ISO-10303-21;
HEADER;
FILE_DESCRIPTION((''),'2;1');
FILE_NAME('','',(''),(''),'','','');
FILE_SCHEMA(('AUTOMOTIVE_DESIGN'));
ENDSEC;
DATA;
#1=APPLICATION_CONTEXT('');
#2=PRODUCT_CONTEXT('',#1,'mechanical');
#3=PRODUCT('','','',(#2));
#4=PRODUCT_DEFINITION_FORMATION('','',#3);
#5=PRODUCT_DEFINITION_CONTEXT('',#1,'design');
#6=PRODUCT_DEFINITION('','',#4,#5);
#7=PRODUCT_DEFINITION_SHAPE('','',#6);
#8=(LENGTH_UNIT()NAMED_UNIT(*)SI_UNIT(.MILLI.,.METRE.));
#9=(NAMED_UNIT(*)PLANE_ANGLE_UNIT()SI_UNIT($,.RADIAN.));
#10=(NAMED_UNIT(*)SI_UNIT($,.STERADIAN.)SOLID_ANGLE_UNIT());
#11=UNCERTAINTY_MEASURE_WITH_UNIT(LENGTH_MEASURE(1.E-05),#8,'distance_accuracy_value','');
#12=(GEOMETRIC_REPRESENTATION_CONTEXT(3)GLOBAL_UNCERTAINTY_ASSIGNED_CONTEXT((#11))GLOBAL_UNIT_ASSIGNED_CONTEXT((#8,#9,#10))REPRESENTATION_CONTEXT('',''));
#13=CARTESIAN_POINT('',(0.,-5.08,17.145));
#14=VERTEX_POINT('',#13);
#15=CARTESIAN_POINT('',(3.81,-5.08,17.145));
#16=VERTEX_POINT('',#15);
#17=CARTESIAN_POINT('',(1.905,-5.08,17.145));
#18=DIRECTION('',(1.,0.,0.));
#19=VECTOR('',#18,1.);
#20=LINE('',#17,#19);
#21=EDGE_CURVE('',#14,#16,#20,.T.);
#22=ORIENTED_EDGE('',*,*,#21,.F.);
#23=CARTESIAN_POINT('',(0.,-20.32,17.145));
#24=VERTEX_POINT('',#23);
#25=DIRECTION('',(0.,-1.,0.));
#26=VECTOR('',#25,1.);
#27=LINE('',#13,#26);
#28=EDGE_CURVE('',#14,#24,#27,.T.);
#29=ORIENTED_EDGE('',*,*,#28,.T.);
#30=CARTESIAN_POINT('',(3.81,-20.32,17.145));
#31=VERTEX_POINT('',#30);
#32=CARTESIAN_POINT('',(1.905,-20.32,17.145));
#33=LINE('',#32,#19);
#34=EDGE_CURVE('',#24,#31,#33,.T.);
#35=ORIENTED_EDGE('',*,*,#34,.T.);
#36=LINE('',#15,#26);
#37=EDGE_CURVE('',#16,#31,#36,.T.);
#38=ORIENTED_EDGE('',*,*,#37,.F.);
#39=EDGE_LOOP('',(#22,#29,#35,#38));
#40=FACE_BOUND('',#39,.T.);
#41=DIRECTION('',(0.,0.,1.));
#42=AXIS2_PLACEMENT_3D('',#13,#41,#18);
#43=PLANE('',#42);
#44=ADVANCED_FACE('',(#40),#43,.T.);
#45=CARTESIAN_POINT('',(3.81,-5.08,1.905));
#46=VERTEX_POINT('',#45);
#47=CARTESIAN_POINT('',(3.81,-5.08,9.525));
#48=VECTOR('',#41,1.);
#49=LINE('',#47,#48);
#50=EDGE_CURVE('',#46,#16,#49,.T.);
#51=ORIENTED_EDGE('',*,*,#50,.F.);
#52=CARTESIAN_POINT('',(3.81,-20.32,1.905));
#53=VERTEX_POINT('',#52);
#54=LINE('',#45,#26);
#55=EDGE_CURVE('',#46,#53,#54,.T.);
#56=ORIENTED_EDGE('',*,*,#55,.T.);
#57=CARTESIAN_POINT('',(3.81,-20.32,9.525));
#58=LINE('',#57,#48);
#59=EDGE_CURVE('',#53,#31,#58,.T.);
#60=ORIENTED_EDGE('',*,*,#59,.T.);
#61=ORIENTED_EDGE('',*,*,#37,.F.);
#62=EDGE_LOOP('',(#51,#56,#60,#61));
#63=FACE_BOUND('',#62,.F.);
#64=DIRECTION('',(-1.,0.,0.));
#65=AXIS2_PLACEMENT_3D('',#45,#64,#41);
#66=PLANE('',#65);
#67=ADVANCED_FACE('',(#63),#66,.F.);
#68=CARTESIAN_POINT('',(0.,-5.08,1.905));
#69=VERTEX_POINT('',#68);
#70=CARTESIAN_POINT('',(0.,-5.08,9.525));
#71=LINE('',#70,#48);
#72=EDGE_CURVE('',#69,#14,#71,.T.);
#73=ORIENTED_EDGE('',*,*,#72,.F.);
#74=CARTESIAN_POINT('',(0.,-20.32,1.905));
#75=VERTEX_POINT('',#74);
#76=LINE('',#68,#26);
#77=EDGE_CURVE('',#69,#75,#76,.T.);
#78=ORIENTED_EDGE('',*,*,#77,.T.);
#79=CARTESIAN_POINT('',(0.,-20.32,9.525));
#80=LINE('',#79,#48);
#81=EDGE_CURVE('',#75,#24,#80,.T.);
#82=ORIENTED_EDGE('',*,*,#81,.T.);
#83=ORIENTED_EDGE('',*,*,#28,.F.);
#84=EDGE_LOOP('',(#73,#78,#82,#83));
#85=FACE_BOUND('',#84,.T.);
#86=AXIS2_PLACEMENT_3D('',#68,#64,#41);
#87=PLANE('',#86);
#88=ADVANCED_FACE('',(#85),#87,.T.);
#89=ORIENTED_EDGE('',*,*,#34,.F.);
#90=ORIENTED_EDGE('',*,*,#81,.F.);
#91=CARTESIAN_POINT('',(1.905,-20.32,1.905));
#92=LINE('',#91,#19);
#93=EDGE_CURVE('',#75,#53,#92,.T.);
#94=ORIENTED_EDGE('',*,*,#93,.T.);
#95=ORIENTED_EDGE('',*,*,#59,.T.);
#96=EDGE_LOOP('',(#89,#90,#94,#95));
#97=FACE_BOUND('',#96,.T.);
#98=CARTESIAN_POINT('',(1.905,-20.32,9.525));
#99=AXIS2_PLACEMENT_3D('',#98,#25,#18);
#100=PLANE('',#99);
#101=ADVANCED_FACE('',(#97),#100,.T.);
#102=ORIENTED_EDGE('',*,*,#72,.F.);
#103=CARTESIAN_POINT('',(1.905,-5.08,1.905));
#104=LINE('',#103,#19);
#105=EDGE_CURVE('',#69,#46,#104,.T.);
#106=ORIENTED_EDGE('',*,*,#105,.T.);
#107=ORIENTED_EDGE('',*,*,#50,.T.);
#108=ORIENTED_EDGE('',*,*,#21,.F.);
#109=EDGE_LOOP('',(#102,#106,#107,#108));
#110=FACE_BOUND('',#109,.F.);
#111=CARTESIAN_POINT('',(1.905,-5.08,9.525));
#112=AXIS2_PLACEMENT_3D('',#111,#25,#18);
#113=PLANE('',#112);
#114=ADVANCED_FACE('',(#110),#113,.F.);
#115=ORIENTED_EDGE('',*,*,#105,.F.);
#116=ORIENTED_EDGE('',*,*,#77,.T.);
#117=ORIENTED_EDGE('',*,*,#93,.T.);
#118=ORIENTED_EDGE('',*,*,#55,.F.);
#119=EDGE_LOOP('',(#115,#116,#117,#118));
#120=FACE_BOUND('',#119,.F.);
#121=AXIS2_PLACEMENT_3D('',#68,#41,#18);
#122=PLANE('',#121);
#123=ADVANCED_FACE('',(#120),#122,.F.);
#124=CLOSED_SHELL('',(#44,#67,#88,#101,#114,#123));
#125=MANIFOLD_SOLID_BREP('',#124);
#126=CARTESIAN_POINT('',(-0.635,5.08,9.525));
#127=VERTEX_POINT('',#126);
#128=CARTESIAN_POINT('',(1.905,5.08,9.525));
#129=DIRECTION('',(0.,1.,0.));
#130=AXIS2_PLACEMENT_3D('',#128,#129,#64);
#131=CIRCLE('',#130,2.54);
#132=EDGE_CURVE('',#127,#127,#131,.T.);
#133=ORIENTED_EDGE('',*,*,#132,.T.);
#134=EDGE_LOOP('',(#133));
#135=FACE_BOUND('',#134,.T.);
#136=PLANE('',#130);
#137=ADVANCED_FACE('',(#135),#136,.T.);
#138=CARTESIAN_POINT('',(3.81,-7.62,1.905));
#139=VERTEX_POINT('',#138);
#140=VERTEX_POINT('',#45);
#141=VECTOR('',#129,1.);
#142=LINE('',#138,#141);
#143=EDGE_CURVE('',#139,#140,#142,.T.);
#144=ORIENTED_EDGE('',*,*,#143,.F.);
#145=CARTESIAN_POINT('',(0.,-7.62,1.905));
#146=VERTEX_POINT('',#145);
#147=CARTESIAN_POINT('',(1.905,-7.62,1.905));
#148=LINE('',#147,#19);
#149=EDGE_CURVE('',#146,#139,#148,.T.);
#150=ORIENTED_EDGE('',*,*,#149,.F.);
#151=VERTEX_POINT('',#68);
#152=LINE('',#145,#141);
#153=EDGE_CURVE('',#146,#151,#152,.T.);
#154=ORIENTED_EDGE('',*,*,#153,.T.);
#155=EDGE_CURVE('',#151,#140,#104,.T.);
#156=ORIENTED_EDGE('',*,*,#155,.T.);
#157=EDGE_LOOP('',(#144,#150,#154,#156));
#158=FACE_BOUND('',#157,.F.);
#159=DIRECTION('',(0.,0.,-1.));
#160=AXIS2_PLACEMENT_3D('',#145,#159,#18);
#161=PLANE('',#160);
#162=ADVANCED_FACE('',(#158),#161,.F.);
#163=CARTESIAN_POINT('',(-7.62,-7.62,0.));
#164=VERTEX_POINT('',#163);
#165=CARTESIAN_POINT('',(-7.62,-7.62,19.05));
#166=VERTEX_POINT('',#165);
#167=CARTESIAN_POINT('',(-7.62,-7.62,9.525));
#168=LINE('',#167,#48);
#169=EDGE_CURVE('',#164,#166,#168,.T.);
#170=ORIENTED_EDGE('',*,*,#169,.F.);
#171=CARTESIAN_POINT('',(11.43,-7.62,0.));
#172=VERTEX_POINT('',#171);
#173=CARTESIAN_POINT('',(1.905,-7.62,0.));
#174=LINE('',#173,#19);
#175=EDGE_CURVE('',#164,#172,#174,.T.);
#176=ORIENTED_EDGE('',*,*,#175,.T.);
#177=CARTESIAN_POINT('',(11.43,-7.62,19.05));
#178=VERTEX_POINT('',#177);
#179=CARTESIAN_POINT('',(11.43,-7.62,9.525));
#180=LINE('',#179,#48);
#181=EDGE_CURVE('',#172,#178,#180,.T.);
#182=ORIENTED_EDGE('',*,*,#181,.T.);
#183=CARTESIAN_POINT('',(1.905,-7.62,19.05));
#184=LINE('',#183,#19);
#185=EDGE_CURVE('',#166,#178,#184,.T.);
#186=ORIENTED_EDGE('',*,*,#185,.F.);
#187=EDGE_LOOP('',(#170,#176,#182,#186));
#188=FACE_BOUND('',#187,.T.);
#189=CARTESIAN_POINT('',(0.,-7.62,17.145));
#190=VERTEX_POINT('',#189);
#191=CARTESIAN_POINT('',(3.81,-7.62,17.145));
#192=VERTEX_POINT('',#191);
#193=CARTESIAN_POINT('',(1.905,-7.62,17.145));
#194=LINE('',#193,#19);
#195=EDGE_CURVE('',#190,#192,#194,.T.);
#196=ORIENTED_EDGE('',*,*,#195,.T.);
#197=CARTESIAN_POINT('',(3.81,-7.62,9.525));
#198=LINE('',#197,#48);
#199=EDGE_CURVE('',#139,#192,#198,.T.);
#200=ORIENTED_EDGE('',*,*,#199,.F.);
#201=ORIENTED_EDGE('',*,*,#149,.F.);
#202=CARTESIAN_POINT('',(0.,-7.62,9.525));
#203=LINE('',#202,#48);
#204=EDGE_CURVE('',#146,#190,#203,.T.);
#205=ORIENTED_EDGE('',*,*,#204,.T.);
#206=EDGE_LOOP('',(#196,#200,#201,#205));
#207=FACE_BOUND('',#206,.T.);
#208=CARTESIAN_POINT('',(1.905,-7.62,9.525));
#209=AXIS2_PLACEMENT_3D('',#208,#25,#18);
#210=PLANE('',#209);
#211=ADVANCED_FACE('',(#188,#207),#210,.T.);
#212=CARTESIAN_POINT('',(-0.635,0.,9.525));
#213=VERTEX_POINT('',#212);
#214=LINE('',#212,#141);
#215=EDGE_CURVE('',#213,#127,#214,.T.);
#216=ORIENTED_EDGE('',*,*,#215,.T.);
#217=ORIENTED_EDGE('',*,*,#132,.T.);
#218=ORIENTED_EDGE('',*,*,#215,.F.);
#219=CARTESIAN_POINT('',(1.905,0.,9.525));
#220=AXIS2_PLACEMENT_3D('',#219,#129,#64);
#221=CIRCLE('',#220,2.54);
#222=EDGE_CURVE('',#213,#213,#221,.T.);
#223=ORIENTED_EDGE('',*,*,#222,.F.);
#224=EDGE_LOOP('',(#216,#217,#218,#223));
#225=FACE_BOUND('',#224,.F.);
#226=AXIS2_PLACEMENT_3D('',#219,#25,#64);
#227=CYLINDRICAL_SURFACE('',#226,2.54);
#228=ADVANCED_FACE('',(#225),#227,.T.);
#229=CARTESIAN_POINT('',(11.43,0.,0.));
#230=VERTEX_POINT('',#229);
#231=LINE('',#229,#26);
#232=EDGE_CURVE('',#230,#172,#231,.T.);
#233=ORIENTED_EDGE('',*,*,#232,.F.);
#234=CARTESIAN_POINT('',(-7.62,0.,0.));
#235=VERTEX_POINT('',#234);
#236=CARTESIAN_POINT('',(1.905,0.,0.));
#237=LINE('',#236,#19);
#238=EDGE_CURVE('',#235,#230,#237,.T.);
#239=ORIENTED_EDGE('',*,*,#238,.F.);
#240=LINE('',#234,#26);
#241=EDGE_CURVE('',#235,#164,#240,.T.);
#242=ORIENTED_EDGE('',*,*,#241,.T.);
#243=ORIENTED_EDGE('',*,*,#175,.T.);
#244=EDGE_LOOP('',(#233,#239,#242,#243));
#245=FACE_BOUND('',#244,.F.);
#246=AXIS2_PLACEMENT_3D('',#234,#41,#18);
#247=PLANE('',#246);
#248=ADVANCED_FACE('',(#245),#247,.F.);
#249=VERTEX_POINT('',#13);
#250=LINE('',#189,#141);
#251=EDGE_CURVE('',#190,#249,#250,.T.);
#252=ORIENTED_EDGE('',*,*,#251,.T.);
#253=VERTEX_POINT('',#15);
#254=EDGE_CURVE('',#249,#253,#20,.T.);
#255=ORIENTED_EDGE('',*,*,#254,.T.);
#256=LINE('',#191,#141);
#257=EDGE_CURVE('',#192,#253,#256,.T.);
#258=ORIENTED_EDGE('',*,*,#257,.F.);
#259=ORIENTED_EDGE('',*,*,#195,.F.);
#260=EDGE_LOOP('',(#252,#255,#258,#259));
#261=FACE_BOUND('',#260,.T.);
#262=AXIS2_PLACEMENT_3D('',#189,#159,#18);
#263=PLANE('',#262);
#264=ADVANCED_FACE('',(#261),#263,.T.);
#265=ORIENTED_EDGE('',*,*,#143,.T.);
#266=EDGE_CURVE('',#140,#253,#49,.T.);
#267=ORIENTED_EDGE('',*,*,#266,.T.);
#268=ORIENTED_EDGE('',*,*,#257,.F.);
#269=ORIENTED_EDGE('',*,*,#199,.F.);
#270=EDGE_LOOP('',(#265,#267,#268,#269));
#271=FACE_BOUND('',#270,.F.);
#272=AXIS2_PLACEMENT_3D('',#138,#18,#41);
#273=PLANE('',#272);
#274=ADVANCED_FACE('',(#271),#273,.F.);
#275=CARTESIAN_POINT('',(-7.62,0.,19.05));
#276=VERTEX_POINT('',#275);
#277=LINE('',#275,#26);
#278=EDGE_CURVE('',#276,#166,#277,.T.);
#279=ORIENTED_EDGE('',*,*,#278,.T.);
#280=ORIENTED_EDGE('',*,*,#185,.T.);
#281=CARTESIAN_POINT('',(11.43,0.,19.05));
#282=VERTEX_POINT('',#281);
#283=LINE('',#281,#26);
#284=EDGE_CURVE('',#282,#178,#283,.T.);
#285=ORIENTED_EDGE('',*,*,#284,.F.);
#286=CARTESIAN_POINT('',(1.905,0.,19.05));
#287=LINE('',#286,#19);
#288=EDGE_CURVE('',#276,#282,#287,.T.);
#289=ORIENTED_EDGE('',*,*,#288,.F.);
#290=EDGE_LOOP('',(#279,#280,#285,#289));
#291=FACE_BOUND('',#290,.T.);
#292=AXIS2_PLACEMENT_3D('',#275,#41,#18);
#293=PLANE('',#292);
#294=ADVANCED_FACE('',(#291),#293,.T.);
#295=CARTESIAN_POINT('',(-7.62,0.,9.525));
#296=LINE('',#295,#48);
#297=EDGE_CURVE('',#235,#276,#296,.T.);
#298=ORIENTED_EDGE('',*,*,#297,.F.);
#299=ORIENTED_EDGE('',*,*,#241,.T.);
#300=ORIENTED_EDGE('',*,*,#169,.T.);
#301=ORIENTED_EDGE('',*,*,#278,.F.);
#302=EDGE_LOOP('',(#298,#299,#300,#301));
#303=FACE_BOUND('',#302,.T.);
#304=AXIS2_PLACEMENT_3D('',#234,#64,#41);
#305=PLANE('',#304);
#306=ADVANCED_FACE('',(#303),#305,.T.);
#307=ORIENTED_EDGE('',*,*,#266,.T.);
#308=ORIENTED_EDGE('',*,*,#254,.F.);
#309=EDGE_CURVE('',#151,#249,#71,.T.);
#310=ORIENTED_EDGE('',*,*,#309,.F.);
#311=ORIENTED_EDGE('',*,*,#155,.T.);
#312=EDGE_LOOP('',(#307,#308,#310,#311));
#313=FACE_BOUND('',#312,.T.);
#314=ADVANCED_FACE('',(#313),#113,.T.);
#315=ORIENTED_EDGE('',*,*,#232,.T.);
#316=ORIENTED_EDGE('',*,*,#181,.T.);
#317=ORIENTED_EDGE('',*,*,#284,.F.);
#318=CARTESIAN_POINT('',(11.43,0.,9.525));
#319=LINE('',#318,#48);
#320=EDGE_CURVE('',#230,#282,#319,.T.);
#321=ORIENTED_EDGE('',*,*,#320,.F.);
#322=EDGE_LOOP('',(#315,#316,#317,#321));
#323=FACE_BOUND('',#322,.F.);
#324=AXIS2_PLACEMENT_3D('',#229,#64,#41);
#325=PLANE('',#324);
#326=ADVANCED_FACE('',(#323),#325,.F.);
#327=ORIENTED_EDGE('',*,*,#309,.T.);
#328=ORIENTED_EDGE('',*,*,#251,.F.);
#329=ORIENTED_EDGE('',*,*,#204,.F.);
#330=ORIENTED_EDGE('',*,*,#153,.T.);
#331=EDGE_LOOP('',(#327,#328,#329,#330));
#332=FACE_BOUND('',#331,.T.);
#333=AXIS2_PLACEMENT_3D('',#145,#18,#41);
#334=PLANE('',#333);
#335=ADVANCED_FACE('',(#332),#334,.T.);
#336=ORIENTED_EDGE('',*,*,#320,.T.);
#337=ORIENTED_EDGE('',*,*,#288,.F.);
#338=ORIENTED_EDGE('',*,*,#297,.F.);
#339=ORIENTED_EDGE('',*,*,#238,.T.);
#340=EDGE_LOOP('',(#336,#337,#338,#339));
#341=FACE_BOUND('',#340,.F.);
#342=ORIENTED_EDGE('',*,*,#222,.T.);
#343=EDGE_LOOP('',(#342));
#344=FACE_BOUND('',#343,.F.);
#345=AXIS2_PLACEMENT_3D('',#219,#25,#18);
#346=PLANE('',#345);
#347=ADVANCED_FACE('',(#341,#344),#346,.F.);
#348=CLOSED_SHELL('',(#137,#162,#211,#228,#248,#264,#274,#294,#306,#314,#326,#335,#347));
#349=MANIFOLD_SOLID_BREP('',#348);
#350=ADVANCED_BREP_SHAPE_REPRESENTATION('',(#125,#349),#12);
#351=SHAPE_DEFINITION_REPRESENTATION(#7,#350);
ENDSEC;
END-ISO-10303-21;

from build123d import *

# Parameters (mm, degrees)
F0_W     = 19.05
F0_H     = 19.05
F1_DEPTH = 7.62
F2_W     = 3.81
F2_H     = 15.24
F3_DEPTH = 2.54
F4_R     = 2.54
F5_DEPTH = 5.08
F6_DEPTH = 15.24


# Not quite as in the source:
# - a feature names something its author has since deleted; it is built from what else it names


with BuildPart() as f1:
    # F0 (on Front) → F1 (new body)
    with BuildSketch(Plane.XZ):
        with Locations((1.905, 9.525)):
            Rectangle(F0_W, F0_H)
    extrude(amount=F1_DEPTH)

    # F2 (on face) → F3 (cut)
    with BuildSketch(Plane.XZ.offset(7.62)):
        with Locations((1.905, 9.525)):
            Rectangle(F2_W, F2_H)
    extrude(amount=-F3_DEPTH, mode=Mode.SUBTRACT)

    # F4 (on face) → F5 (join)
    with BuildSketch(Plane(origin=(0, 0, 0), x_dir=(-1, 0, 0), z_dir=(0, 1, 0))):
        with Locations((-1.905, 9.525)):
            Circle(F4_R)
    extrude(amount=F5_DEPTH)


with BuildPart() as f6:
    # F6 (new): a face of the model
    f6_faces = [f1.part.faces().sort_by_distance(p)[0] for p in [
        (1.905, -5.08, 9.525),
    ]]
    extrude(f6_faces, amount=F6_DEPTH)


solid = Compound([f1.part, f6.part])
